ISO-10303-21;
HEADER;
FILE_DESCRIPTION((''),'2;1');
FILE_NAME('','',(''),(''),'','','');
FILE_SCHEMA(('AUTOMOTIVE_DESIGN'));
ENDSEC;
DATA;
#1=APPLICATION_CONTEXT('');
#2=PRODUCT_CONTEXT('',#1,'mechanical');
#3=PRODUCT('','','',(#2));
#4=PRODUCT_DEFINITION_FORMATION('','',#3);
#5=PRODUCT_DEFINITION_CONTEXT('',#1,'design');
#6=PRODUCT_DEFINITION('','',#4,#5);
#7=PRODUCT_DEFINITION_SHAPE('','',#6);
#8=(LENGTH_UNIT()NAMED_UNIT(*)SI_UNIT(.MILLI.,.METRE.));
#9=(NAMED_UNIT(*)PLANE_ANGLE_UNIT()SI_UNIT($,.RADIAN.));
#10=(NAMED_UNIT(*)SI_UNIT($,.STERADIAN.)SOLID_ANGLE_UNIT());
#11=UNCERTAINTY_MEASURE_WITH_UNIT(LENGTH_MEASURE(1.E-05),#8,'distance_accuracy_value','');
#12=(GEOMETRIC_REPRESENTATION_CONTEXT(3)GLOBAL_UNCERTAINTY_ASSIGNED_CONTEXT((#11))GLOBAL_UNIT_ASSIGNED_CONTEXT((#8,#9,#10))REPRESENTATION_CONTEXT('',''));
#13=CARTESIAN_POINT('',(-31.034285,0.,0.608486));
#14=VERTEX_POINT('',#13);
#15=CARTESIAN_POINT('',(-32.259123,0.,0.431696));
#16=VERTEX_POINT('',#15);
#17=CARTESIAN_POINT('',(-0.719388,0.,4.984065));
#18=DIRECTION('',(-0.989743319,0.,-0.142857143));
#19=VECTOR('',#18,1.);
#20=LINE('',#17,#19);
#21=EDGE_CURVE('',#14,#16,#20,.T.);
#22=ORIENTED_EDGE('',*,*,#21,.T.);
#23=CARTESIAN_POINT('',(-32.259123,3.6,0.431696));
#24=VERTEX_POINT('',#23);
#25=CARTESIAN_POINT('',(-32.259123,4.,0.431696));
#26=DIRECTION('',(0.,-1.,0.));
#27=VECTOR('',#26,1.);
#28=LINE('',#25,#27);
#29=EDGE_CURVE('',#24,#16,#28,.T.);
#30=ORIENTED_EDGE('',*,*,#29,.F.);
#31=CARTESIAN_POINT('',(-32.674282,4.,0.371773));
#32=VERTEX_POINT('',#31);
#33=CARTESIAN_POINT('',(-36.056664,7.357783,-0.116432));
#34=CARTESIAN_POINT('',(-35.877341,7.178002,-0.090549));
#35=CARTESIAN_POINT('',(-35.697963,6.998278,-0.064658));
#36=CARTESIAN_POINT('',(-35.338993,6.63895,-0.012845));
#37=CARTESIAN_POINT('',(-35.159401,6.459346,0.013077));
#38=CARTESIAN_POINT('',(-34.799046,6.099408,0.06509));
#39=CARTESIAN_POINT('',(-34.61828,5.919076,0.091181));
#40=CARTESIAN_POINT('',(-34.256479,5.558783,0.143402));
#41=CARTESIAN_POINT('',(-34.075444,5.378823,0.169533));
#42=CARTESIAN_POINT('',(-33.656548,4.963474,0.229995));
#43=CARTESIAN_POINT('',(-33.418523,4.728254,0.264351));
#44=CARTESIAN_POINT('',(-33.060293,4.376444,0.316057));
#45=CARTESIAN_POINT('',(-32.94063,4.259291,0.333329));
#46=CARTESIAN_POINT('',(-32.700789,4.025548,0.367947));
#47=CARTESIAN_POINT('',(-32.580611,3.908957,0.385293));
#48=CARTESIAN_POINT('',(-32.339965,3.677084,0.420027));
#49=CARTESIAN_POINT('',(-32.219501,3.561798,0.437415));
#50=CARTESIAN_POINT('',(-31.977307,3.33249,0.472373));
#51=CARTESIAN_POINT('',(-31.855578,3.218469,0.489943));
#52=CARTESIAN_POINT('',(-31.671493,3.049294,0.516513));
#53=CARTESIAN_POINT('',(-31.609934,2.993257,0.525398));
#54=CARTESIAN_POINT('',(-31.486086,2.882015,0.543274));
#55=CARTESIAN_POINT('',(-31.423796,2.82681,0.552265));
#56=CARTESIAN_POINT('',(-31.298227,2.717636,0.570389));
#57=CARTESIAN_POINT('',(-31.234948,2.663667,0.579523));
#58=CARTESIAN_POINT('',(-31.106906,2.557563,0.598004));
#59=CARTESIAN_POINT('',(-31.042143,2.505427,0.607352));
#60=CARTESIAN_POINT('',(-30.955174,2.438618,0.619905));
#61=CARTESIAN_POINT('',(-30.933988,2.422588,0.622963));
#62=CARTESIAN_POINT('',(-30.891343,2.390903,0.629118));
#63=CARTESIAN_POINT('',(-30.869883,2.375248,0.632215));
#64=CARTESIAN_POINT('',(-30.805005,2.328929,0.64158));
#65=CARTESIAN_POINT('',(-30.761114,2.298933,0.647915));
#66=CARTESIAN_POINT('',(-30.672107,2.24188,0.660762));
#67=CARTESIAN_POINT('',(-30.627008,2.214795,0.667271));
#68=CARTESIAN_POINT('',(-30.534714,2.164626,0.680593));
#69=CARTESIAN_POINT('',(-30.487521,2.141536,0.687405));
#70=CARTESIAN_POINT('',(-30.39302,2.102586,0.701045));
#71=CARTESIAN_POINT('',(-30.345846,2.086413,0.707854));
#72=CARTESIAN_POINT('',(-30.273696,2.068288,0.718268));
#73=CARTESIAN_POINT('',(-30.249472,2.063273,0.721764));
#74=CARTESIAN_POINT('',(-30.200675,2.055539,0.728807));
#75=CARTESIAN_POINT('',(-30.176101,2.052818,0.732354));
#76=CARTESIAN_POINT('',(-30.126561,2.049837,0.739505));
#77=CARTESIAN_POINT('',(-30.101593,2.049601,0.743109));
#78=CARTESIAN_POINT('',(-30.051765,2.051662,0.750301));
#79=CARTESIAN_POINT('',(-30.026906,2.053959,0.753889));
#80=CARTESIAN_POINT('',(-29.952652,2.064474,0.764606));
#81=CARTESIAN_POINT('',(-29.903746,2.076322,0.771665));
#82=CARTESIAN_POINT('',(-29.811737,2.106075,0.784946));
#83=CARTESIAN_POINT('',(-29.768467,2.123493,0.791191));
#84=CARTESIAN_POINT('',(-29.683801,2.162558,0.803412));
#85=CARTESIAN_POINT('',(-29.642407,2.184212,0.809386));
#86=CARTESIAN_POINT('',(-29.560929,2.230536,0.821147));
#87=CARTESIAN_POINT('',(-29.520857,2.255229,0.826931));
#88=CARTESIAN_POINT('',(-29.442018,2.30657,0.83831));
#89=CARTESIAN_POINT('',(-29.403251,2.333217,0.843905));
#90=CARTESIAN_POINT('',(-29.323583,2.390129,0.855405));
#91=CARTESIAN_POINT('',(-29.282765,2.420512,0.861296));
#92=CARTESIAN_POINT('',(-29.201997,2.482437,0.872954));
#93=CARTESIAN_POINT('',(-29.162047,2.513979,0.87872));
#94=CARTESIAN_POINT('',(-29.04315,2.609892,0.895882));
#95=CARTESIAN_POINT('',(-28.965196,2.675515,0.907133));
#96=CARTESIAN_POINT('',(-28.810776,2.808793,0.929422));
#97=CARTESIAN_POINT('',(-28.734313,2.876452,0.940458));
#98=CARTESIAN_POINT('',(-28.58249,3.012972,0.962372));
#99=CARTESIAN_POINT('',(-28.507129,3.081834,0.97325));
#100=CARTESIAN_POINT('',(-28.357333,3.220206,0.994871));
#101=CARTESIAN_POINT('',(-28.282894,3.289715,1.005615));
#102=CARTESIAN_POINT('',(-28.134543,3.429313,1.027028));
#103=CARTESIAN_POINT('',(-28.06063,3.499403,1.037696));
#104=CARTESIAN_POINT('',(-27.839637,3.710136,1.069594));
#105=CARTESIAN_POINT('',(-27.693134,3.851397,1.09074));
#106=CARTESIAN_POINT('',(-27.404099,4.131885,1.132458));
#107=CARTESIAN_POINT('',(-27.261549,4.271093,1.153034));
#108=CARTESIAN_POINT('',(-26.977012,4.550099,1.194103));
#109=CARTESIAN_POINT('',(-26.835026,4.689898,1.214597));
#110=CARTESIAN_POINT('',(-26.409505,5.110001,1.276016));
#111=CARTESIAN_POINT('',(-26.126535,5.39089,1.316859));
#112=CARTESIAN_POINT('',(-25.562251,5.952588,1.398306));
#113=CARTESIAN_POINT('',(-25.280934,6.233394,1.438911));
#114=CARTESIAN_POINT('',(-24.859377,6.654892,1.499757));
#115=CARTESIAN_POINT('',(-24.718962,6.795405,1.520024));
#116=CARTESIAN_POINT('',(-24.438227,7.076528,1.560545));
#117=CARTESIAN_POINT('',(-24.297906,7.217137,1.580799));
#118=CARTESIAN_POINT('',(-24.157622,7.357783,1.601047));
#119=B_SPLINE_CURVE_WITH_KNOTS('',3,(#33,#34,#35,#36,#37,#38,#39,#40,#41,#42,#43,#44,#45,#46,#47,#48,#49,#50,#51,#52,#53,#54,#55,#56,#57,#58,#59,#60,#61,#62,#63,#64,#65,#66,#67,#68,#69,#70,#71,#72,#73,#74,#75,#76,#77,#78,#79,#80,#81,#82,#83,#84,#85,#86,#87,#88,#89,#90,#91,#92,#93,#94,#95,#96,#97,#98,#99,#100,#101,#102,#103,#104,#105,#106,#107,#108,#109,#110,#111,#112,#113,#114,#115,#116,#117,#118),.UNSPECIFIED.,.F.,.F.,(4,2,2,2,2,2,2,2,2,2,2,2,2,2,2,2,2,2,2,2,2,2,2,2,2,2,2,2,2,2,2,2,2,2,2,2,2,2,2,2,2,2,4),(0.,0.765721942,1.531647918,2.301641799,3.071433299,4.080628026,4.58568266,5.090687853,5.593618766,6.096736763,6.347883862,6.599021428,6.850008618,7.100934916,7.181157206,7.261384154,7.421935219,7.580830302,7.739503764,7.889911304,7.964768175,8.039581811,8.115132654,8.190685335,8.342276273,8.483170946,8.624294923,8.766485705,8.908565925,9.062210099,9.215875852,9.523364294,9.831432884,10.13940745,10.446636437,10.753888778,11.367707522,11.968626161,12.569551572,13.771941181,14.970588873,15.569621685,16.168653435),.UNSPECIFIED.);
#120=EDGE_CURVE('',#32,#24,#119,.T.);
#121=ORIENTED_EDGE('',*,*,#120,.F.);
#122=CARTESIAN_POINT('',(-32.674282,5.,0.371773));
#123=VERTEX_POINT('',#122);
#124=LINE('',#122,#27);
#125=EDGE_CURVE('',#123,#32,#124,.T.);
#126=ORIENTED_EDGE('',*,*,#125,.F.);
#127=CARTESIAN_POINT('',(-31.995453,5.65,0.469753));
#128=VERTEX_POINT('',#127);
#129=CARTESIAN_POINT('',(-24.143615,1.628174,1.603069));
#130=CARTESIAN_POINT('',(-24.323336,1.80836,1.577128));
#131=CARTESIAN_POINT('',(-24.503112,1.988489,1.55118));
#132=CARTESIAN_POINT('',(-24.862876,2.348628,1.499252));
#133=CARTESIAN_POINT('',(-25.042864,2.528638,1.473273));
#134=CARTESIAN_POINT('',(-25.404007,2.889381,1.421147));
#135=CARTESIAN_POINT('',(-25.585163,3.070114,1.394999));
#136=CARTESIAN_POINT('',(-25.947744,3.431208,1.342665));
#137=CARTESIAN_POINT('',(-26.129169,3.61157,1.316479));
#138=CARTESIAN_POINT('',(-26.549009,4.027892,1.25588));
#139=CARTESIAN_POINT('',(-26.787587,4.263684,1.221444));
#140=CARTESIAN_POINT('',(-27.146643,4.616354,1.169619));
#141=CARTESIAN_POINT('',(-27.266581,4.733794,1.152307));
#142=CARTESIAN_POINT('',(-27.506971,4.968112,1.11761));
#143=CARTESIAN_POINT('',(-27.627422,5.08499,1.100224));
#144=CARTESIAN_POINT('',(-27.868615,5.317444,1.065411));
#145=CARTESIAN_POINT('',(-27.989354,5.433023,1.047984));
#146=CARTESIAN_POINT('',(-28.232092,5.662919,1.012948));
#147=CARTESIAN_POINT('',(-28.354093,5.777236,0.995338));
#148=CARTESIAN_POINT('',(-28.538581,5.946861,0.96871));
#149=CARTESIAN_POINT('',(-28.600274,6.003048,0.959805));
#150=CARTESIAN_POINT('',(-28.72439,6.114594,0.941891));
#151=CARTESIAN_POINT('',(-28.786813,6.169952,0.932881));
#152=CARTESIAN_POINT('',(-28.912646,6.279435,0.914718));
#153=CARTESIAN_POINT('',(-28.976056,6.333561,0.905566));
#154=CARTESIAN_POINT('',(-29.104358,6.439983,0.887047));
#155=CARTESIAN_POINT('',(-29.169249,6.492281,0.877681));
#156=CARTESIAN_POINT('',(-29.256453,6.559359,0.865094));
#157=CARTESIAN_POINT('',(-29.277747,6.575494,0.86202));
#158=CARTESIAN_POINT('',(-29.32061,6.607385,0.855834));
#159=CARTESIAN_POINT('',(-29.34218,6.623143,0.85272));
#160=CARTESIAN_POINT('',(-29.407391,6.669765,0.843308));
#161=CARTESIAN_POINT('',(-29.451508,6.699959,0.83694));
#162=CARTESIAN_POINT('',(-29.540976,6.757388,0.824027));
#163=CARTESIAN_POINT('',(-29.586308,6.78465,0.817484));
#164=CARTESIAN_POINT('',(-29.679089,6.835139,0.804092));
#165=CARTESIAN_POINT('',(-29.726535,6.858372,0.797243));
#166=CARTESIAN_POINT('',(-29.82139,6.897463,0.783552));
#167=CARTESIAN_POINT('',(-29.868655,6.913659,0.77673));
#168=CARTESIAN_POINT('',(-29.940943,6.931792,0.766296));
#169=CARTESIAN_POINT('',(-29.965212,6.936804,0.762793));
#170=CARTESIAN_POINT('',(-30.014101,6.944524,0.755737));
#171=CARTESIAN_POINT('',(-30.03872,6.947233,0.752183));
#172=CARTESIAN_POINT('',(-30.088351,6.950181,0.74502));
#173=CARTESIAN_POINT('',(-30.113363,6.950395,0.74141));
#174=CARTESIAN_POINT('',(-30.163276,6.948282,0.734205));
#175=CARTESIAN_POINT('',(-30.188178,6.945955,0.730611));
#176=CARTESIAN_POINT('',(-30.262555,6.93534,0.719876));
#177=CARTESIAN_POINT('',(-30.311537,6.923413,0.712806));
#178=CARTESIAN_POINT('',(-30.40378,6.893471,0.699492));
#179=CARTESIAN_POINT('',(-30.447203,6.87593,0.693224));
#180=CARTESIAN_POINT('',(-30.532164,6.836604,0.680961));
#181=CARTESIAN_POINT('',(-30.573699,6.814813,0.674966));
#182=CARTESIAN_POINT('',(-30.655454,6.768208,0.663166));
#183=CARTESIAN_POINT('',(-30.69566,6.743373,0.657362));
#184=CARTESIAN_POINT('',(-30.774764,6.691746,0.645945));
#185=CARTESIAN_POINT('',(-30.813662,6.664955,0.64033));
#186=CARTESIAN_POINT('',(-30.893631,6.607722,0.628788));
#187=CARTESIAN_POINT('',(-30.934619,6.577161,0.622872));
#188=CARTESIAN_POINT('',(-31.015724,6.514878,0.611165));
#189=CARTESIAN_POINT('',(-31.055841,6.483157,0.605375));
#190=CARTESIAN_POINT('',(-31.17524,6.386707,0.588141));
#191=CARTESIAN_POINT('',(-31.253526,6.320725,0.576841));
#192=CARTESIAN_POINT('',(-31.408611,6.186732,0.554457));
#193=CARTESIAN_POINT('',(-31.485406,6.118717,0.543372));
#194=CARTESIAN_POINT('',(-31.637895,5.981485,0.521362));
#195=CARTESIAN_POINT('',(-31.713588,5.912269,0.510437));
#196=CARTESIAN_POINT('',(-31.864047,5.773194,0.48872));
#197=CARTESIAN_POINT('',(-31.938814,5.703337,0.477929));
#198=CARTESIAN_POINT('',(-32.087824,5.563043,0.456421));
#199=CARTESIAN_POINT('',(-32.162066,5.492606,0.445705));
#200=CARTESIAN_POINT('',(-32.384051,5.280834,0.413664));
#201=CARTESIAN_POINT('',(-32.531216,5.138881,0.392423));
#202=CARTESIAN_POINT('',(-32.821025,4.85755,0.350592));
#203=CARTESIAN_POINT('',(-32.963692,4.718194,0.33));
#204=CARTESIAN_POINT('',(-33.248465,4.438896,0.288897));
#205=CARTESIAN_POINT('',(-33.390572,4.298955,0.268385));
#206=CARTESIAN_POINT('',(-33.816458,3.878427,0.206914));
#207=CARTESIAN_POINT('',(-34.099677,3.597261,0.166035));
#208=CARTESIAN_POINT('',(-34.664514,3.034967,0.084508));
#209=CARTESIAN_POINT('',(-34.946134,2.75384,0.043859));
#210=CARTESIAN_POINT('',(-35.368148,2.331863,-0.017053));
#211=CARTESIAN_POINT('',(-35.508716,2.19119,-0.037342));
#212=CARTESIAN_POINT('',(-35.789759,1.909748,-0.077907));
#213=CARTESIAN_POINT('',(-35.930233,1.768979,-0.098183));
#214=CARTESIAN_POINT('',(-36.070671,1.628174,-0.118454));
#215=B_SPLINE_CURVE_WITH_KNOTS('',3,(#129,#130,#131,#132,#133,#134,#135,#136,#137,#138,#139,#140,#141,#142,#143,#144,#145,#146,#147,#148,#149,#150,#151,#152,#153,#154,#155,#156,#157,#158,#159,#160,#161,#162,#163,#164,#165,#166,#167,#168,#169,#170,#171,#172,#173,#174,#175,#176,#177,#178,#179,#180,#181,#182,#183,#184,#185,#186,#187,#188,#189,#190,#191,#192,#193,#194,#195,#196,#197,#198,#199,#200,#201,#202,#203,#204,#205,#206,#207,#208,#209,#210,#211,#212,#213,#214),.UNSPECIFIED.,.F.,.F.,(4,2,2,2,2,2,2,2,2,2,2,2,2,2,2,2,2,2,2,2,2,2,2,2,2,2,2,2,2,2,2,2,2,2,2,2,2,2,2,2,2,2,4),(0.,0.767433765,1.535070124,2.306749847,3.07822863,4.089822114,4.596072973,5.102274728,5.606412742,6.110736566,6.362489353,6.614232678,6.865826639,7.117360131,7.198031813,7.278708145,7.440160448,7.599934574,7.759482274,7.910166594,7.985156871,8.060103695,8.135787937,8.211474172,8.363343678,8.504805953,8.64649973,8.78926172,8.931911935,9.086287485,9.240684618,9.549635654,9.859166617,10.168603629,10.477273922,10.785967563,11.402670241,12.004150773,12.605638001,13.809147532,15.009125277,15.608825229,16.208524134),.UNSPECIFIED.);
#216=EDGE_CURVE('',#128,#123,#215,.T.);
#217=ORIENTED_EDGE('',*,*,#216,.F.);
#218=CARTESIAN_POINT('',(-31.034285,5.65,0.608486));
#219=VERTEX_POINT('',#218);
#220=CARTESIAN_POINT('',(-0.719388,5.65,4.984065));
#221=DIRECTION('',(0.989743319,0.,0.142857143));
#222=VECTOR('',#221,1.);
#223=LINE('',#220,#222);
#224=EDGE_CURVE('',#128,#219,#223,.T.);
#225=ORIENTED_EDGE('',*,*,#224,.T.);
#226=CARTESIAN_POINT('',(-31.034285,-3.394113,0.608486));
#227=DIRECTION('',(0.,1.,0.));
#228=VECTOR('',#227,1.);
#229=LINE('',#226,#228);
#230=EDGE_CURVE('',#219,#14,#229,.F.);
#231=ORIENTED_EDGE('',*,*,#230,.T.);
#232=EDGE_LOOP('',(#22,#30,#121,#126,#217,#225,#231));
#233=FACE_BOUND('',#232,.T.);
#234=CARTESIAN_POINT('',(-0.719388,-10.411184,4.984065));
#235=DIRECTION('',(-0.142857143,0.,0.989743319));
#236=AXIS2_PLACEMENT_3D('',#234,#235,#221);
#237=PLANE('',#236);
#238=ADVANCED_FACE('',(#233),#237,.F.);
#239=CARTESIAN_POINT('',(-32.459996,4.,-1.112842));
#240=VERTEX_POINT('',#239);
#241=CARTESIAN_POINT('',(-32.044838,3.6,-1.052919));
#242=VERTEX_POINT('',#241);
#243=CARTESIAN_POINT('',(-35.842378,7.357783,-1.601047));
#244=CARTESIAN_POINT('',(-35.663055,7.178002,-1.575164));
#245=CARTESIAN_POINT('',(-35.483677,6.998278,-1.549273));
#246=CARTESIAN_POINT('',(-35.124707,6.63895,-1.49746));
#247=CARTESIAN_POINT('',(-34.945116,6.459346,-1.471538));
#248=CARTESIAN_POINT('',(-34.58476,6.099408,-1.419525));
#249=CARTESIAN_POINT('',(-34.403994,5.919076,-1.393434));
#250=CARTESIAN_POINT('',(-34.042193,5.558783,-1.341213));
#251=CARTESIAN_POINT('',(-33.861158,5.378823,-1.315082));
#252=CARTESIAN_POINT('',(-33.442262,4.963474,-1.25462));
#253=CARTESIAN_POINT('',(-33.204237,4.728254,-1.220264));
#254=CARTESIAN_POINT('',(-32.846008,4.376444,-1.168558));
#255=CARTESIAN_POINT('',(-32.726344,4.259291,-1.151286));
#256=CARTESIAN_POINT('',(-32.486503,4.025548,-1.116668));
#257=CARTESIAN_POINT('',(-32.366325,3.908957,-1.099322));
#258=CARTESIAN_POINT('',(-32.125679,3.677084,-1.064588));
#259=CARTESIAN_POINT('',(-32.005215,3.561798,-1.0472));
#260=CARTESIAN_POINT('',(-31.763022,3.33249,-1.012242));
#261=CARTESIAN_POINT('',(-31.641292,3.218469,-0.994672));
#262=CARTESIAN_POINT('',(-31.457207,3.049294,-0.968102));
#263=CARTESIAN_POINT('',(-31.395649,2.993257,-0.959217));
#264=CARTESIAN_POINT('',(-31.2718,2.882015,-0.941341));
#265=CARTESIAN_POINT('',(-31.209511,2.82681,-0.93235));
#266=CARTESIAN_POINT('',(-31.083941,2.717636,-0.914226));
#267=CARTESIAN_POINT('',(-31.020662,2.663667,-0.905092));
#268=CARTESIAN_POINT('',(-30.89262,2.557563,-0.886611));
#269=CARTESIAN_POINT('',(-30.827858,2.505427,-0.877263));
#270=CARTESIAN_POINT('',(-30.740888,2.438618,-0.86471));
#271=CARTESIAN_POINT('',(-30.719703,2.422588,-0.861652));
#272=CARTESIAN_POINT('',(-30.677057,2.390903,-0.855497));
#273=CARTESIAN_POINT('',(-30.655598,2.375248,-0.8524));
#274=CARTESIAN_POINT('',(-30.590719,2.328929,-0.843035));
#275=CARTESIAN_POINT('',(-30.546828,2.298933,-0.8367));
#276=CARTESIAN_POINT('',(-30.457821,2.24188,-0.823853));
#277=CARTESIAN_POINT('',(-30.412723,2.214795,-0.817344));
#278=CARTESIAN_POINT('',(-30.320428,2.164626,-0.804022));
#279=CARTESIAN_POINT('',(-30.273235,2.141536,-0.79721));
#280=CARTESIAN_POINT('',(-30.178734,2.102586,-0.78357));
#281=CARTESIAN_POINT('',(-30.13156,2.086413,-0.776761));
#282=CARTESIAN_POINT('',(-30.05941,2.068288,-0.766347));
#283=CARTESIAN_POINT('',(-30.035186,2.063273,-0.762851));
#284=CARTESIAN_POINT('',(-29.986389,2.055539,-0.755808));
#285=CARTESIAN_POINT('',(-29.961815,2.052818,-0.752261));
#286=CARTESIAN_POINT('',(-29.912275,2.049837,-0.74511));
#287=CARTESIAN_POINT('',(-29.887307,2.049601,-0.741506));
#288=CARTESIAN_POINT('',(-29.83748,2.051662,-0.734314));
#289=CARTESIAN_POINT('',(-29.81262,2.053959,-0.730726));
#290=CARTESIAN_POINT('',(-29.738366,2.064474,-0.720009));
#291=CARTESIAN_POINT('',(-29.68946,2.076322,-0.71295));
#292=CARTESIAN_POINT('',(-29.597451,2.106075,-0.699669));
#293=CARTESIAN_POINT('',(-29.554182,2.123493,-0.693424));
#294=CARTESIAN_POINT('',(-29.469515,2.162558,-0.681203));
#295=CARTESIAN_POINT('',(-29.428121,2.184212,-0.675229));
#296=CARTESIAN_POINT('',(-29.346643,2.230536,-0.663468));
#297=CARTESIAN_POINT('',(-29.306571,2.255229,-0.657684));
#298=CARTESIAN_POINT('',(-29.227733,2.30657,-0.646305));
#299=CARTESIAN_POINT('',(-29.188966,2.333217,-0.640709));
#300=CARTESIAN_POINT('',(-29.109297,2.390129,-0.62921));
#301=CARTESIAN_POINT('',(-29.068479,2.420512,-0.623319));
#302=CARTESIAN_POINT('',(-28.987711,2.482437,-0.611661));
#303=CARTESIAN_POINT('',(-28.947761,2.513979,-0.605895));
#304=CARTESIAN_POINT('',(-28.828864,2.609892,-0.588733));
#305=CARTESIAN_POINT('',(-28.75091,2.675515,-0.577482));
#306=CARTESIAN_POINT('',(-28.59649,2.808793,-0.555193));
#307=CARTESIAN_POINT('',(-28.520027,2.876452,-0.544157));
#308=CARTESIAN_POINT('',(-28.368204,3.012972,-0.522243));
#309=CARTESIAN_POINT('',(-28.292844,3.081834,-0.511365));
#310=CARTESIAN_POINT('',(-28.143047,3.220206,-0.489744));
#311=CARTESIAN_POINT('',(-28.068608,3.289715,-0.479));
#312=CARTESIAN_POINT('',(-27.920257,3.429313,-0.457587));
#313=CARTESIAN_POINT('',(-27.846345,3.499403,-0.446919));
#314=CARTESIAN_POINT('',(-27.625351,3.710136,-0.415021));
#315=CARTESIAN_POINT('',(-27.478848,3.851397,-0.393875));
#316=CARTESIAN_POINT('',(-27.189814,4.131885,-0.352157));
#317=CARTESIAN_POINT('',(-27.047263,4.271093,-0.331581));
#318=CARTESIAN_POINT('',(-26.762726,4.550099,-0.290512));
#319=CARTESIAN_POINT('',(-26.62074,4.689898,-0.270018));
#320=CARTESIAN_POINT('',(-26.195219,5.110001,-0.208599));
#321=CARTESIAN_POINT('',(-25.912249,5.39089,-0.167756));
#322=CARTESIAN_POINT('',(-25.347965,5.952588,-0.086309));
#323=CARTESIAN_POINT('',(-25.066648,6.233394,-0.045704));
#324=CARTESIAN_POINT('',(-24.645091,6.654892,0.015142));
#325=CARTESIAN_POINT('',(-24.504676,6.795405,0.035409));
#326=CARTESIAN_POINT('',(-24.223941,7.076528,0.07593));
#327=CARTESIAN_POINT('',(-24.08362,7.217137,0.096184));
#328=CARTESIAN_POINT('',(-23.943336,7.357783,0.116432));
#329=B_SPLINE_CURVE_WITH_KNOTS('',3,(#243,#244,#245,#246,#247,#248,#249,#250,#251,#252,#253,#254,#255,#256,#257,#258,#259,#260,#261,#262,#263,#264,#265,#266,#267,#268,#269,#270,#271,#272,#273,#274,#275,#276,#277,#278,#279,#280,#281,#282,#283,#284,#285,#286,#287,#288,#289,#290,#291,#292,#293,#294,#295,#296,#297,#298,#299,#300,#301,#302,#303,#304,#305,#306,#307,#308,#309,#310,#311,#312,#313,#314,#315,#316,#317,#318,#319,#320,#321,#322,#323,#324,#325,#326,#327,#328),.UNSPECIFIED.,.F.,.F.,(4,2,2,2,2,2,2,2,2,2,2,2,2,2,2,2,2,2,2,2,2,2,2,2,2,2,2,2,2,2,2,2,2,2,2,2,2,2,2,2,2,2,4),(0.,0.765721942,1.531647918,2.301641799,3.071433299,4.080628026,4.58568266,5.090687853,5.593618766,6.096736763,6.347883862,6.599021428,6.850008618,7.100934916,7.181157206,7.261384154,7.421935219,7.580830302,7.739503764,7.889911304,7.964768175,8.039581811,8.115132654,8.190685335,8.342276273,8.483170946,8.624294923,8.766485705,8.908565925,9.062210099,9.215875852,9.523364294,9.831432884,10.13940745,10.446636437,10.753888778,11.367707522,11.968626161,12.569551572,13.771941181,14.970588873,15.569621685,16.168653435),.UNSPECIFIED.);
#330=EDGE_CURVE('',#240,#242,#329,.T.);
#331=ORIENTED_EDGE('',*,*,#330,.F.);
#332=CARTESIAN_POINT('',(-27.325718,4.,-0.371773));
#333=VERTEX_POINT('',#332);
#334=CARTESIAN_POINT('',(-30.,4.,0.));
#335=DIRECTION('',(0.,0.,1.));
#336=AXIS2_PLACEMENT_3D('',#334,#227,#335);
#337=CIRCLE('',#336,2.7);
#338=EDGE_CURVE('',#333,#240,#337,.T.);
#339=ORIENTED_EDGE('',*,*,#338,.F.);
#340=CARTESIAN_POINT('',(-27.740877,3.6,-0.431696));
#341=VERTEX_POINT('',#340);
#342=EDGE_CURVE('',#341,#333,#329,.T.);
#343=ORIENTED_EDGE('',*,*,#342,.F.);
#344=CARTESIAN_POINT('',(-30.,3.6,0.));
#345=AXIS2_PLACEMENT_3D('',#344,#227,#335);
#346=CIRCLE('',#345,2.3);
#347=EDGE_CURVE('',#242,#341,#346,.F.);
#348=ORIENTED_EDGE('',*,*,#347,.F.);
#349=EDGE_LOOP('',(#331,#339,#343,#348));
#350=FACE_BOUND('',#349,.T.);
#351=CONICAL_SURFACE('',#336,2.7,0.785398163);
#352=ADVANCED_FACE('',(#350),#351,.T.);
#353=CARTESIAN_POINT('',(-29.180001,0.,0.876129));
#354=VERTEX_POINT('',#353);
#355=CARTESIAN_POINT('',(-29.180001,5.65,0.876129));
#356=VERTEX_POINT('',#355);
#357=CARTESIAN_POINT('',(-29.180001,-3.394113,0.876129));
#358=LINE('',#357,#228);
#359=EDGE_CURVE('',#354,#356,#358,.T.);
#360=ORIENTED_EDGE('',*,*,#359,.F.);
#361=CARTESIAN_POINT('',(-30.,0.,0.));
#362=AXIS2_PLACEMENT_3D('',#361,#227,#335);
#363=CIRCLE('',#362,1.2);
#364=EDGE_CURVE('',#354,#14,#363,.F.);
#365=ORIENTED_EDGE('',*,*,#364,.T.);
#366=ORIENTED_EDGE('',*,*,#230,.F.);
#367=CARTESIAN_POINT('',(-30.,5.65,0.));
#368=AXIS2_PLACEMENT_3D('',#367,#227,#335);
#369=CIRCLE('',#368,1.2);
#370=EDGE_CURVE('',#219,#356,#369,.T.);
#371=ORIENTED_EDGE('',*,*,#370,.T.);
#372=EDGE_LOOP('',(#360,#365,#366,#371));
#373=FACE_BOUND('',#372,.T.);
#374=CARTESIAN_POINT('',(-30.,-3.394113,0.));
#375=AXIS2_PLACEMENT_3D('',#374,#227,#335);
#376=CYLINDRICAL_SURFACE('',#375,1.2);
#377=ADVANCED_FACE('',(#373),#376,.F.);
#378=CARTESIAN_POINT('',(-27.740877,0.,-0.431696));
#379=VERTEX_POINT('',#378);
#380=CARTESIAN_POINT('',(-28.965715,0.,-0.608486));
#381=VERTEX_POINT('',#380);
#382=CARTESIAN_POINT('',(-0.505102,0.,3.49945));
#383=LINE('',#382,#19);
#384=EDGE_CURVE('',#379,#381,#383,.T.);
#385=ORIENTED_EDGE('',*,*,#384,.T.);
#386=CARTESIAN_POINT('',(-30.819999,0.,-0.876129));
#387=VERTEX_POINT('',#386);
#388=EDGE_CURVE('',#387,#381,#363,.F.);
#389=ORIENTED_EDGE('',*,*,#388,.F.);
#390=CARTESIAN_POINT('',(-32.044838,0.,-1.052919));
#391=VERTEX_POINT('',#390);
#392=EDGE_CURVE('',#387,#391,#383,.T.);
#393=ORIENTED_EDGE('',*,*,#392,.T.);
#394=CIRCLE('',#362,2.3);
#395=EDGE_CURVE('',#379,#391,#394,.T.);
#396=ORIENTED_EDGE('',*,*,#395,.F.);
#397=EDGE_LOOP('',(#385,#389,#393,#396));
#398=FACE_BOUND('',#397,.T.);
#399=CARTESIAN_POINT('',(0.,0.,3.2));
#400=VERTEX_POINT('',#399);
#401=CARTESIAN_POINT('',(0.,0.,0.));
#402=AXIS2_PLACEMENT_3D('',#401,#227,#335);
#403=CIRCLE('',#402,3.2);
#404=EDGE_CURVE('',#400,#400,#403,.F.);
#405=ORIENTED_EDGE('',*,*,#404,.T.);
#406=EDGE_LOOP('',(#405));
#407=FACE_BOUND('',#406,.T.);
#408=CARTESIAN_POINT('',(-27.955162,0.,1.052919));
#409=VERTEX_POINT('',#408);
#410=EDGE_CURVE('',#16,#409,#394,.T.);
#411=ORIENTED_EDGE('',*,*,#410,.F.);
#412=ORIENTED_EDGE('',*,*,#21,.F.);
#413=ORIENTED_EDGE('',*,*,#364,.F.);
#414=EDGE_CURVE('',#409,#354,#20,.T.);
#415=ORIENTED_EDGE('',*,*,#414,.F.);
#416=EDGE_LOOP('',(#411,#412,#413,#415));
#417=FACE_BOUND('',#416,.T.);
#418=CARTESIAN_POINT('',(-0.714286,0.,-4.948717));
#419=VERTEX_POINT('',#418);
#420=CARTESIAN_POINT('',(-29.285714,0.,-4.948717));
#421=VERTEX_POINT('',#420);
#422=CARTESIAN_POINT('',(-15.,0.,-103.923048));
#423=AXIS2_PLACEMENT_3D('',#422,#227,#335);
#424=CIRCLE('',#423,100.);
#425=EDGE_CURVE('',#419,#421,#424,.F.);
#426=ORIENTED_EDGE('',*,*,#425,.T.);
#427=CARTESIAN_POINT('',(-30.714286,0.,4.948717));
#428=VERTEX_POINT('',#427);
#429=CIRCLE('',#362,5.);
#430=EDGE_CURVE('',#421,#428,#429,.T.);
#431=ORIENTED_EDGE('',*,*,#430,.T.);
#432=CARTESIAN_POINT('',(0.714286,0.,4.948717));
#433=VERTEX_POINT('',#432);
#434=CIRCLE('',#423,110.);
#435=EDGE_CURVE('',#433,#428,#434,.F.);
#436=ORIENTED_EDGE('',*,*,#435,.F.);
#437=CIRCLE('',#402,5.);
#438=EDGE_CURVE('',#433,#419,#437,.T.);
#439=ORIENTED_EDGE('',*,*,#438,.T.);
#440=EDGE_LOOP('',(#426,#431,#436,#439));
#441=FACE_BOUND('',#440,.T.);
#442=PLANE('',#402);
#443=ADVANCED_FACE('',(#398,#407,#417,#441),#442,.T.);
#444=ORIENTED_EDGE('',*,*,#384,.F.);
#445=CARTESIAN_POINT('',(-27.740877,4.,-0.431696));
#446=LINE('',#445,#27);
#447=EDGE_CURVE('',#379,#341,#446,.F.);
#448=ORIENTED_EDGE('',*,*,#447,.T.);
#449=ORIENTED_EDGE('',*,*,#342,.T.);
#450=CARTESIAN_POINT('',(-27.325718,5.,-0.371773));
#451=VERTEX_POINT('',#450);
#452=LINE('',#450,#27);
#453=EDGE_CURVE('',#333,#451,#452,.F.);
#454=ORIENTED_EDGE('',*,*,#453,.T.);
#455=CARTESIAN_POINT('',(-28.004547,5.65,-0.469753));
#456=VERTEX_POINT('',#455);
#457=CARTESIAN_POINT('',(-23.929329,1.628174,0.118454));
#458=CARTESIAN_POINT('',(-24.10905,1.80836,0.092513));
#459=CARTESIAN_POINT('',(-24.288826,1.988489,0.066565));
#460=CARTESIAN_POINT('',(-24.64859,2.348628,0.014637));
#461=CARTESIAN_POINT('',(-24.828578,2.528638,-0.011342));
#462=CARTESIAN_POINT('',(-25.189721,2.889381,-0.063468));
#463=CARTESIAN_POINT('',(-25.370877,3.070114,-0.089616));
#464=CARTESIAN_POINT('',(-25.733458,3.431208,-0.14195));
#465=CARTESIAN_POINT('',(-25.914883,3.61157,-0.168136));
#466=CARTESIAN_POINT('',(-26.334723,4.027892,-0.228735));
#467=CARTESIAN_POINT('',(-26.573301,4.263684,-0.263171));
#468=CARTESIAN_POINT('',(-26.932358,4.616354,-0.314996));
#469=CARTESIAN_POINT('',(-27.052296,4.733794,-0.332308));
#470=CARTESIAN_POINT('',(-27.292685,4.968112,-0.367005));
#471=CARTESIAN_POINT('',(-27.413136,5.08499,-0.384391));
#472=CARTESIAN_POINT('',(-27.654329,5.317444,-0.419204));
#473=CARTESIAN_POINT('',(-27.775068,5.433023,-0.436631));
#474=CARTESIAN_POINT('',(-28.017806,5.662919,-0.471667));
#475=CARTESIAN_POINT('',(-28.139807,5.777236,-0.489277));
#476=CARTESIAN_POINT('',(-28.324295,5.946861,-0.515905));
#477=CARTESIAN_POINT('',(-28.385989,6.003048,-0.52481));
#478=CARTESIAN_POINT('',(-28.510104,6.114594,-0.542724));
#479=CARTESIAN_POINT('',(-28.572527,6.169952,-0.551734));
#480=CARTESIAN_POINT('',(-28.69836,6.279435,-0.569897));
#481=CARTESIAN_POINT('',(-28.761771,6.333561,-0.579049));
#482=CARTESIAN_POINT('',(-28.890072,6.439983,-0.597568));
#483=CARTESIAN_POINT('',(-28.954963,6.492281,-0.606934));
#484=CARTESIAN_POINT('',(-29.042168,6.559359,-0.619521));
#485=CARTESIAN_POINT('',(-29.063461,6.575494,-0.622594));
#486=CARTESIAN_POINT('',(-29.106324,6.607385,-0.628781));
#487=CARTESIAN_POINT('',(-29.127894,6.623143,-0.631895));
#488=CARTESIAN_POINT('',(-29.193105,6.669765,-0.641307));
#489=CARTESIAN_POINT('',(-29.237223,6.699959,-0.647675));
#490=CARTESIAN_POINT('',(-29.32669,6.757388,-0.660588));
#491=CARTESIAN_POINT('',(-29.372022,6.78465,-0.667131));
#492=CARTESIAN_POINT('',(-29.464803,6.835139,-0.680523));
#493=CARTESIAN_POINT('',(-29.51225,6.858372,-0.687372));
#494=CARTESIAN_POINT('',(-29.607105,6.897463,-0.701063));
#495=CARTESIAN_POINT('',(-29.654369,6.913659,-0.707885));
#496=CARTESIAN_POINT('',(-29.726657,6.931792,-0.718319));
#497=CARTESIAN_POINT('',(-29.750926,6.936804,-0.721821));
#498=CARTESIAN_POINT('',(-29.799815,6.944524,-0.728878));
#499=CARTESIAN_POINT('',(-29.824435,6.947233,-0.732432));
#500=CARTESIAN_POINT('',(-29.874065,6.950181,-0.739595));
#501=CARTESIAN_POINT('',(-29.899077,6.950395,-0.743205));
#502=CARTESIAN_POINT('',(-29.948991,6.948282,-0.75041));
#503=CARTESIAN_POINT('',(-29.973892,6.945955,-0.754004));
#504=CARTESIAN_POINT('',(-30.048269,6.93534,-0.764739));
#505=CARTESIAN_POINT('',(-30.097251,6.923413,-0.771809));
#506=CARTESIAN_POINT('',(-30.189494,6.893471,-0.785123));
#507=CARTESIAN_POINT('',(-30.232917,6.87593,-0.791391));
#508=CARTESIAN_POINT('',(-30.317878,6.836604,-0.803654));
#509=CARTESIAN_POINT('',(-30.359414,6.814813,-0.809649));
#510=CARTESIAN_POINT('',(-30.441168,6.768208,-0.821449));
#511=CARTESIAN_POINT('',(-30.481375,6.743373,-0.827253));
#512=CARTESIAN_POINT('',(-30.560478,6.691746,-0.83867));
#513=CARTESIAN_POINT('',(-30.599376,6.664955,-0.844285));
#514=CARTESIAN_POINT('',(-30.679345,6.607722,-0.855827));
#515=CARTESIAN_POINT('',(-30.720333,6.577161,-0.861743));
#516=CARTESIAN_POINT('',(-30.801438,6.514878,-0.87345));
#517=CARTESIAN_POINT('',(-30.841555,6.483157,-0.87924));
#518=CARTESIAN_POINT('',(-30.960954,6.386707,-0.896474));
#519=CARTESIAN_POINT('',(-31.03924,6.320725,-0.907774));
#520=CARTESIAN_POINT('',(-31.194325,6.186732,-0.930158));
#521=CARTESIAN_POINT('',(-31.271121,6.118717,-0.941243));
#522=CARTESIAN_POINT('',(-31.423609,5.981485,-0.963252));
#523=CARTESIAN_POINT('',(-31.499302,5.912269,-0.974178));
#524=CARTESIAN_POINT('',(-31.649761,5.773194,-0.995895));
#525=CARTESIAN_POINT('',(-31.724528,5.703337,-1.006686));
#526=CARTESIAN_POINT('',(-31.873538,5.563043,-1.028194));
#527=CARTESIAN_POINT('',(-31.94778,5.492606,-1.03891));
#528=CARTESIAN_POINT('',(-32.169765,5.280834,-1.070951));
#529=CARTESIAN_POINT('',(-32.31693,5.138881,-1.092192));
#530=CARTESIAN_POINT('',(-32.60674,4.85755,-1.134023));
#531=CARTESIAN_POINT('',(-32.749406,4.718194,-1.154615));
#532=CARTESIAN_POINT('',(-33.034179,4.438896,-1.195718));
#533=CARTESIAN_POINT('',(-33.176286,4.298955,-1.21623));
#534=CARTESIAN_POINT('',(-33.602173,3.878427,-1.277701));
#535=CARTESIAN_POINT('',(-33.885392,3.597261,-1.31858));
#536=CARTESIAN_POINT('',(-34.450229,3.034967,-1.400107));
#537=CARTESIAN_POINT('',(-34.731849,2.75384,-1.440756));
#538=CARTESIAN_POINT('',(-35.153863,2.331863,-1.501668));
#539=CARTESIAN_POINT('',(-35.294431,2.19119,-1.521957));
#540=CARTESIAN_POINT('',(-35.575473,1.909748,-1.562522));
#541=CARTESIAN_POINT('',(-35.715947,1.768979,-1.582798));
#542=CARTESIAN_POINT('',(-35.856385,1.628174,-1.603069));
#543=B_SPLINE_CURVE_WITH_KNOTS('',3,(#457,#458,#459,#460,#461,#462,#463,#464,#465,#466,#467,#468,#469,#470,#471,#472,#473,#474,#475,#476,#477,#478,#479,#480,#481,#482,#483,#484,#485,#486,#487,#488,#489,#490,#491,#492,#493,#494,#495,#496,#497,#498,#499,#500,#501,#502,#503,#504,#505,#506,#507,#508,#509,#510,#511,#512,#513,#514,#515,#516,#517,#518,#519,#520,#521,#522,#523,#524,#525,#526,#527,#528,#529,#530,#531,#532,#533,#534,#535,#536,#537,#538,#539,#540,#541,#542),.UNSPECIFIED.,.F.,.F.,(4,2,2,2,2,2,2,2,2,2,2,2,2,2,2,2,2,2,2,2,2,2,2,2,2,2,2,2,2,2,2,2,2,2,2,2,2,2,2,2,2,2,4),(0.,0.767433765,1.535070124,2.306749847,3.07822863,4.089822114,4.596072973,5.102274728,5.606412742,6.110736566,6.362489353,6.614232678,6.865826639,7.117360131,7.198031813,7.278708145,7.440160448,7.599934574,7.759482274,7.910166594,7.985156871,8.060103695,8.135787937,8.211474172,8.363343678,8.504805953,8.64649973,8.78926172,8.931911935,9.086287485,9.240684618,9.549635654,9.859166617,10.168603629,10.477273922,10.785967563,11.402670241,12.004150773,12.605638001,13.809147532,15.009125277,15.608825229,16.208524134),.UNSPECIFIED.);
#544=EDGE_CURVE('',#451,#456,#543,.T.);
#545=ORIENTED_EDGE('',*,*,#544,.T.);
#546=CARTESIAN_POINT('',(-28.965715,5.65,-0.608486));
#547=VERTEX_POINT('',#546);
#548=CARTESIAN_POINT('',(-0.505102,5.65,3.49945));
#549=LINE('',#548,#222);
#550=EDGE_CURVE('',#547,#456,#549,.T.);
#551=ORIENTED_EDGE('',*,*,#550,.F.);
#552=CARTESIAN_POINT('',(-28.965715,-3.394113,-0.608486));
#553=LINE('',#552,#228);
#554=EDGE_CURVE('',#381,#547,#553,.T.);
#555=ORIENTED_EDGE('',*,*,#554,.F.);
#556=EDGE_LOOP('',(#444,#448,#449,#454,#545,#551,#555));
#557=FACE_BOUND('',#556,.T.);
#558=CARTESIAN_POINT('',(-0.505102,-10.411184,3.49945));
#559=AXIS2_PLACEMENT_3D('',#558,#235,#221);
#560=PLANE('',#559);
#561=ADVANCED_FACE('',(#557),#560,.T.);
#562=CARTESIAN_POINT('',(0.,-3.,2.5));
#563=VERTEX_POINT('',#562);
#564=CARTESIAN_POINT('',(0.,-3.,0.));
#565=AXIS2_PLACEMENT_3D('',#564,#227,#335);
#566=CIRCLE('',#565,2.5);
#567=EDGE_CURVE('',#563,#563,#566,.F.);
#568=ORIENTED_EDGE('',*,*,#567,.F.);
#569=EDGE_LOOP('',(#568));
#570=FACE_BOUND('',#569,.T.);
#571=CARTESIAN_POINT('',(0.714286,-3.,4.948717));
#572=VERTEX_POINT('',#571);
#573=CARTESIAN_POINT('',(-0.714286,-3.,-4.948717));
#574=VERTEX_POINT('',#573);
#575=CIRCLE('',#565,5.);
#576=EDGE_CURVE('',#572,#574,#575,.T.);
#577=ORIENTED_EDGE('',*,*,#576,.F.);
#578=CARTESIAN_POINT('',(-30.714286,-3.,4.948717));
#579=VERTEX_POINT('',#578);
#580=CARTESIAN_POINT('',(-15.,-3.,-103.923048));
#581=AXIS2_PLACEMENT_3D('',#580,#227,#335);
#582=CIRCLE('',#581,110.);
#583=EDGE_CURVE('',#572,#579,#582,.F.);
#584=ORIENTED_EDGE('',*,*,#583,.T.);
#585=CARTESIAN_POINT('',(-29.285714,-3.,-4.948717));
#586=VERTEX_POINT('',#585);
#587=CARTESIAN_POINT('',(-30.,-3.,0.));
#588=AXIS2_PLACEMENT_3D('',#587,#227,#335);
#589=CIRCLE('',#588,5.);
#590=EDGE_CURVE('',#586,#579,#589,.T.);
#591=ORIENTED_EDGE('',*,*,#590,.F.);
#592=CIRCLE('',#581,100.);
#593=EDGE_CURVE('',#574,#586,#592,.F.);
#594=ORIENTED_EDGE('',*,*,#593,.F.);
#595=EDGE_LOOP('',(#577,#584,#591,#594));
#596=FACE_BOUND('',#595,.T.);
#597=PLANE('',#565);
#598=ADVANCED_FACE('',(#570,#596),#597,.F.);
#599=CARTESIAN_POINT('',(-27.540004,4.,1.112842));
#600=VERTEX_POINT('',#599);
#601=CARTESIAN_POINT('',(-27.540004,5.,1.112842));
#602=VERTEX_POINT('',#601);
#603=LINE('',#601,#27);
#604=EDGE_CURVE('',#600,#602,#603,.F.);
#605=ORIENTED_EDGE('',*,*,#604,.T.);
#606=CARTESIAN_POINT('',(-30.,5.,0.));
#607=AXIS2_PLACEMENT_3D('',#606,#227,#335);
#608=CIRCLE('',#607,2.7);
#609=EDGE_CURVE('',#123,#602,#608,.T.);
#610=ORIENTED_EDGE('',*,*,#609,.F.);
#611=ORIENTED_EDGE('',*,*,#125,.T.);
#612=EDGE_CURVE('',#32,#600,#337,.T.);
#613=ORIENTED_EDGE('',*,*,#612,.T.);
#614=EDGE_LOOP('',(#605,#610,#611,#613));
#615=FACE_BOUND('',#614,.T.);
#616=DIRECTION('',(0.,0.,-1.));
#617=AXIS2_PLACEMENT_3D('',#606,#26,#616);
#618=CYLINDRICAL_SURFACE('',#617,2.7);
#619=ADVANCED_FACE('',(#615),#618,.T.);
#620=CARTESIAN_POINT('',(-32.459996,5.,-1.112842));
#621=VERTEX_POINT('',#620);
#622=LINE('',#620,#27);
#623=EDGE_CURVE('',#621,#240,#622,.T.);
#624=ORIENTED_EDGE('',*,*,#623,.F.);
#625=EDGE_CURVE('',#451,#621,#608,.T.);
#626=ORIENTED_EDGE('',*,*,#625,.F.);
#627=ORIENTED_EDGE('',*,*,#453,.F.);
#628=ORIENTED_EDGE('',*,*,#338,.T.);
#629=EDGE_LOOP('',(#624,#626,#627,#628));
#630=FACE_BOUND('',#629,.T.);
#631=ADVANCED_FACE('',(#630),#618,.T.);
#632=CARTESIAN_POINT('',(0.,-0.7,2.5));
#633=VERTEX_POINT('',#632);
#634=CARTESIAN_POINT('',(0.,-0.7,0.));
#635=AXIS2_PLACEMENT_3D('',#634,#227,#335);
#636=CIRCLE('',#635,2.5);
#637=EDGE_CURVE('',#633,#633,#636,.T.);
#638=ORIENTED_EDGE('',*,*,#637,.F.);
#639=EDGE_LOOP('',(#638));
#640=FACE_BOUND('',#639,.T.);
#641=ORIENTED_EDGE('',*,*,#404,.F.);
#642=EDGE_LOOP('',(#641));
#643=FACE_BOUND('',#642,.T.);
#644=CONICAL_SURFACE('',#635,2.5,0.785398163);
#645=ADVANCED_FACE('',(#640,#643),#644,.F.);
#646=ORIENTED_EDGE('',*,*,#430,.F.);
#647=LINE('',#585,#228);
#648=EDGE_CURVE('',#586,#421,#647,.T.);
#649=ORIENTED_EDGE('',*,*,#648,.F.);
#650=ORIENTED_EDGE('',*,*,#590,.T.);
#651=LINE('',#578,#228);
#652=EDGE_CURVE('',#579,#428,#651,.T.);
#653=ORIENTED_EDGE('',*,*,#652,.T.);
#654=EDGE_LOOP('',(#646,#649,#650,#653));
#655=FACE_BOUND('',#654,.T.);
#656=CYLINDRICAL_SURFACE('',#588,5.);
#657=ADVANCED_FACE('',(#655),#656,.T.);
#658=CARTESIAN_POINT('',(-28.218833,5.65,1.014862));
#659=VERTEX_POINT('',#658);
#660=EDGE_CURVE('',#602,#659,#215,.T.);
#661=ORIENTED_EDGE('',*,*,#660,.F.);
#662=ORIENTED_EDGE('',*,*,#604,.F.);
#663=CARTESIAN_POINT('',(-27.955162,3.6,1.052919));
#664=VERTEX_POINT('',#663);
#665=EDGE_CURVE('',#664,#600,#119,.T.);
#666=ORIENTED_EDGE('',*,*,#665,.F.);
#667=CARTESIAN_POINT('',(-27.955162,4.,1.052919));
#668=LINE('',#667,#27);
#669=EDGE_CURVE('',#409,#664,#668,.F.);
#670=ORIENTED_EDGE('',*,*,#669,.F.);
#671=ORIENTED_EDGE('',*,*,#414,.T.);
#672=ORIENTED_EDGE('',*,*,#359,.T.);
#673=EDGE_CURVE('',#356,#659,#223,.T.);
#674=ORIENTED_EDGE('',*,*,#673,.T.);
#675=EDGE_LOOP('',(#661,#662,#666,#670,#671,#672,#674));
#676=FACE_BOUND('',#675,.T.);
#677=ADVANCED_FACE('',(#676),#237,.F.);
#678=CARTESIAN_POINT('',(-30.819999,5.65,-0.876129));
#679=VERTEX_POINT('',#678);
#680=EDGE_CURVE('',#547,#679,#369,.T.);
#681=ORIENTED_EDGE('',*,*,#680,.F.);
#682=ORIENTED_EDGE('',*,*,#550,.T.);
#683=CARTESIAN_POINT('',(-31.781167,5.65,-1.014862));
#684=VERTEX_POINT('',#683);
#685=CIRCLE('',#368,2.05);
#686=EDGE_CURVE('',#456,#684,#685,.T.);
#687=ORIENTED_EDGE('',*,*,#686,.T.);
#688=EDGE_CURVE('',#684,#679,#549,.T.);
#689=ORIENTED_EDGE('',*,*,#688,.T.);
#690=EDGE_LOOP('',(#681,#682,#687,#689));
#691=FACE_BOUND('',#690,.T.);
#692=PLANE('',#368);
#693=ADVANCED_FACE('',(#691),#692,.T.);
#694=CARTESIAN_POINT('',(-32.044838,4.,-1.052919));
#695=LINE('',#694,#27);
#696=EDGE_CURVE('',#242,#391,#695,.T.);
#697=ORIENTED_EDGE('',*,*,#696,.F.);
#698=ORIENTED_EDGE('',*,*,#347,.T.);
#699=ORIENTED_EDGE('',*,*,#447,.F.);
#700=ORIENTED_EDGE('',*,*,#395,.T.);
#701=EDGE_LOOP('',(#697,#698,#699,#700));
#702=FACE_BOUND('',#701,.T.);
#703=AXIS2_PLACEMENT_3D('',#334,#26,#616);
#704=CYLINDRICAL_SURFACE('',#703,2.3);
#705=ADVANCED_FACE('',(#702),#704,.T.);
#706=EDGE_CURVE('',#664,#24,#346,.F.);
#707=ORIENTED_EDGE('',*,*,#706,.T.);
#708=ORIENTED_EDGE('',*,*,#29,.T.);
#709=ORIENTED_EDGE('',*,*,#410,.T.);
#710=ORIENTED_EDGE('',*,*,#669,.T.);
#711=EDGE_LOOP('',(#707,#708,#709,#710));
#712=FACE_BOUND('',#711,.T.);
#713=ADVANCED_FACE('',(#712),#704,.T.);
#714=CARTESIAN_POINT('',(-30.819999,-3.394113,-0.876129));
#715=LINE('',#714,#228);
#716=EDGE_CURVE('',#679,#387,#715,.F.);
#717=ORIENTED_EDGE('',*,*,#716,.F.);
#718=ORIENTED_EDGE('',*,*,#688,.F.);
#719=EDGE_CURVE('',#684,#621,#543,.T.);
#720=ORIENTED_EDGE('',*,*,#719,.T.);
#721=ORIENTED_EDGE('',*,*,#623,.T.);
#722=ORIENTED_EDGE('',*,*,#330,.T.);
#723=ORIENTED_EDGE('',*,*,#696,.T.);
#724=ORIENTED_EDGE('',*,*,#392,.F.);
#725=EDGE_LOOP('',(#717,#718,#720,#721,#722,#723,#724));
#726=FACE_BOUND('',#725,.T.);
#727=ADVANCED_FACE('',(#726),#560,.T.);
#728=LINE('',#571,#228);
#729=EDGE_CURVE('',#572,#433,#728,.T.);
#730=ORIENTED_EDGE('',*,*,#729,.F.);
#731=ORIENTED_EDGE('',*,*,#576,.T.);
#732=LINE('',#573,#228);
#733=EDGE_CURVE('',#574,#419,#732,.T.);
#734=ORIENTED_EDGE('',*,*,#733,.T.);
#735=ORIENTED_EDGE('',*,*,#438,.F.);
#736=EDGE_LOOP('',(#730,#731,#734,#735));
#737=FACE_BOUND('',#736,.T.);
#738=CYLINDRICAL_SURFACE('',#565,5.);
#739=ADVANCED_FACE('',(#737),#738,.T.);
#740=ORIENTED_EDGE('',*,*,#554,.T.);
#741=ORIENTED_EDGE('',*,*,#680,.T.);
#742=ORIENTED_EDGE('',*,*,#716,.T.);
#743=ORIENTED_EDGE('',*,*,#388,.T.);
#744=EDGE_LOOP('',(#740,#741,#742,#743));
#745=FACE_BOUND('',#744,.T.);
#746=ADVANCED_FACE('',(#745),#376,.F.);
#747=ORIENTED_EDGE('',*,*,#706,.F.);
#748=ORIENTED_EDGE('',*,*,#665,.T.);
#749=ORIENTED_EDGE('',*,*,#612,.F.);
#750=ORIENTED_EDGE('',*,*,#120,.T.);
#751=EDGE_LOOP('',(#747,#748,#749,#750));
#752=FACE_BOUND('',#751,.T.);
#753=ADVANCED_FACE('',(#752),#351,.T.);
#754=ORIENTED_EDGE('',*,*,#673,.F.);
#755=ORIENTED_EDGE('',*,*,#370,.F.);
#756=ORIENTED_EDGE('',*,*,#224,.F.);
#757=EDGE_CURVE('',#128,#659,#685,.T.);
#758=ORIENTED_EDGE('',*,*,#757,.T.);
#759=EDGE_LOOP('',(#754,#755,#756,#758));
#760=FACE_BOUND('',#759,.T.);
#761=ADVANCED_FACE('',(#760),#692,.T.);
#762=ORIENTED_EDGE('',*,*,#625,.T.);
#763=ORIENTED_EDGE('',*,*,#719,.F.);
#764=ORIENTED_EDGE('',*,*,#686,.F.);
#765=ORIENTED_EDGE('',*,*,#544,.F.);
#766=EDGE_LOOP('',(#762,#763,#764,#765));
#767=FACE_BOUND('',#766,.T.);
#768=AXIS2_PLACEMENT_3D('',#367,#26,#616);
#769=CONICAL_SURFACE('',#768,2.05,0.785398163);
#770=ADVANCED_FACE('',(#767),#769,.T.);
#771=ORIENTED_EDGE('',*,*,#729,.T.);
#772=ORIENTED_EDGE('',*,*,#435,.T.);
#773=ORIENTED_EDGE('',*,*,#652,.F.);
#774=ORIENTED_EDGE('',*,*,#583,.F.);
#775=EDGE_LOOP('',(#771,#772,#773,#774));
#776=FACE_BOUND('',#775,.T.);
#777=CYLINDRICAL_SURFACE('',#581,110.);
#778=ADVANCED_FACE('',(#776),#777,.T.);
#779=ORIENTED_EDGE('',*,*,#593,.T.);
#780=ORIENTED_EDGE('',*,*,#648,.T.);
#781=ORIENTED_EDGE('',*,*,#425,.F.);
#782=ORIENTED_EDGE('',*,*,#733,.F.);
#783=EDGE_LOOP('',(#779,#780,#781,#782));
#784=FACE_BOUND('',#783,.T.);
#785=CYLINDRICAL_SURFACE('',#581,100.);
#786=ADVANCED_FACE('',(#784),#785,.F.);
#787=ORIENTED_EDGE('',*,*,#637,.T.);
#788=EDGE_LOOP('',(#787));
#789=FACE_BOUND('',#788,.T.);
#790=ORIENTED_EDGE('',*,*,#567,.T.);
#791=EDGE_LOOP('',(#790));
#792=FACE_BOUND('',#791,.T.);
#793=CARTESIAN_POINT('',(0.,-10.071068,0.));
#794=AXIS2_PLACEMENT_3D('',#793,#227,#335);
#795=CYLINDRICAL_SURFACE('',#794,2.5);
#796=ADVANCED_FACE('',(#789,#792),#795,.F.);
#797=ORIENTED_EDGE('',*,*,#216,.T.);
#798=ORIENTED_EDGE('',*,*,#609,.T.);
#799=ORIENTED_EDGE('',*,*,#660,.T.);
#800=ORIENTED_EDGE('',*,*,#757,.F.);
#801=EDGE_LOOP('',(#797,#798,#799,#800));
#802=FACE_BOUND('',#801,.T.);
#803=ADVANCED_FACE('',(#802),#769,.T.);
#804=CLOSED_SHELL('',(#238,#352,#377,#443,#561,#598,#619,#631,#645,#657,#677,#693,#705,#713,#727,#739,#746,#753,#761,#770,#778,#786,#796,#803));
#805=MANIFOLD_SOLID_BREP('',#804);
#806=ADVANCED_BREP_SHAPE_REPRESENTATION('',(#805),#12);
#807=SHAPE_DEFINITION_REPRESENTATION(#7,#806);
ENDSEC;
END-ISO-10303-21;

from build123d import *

# Parameters (mm, degrees)
SKETCH1_R           = 5
BOSS_EXTRUDE1_DEPTH = 3
SKETCH2_R           = 2.5
CUT_EXTRUDE1_DEPTH  = 3
CHAMFER1_SIZE       = 0.7
SKETCH3_R           = 2.3
BOSS_EXTRUDE2_DEPTH = 4
SKETCH4_R           = 2.7
BOSS_EXTRUDE3_DEPTH = 1
CHAMFER2_SIZE       = 0.4
SKETCH5_R           = 2.05
BOSS_EXTRUDE4_DEPTH = 0.65
CHAMFER3_SIZE       = 0.65
CUT_EXTRUDE2_REACH  = 38.562
SKETCH7_R           = 1.2
CUT_EXTRUDE3_DEPTH  = 5.65


with BuildPart() as part:
    # Sketch1 → Boss-Extrude1 (new body)
    with BuildSketch(Plane(origin=(0, 0, 0), x_dir=(1, 0, 0), z_dir=(0, 1, 0))):
        with Locations((-30, 0)):
            Circle(SKETCH1_R)
        with BuildLine():
            ThreePointArc((0.714285714, -4.948716593), (-4.948716593, -0.714285714), (-0.714285714, 4.948716593))
            ThreePointArc((-0.714285714, 4.948716593), (-15, 3.923048454), (-29.285714286, 4.948716593))
            ThreePointArc((-29.285714286, 4.948716593), (-26.22035527, 3.273268354), (-25, 0))
            ThreePointArc((-25, 0), (-26.726731646, -3.77964473), (-30.714285714, -4.948716593))
            ThreePointArc((-30.714285714, -4.948716593), (-15, -6.076951546), (0.714285714, -4.948716593))
        make_face()
        Circle(SKETCH1_R)
    extrude(amount=-BOSS_EXTRUDE1_DEPTH)

    # Sketch2 → Cut-Extrude1 (cut)
    with BuildSketch(Plane(origin=(0, 0, 0), x_dir=(1, 0, 0), z_dir=(0, 1, 0))):
        with Locations(Location((0, 0, 0), (0, 0, 270))):
            Circle(SKETCH2_R)
    extrude(amount=-CUT_EXTRUDE1_DEPTH, mode=Mode.SUBTRACT)

    # Chamfer1
    chamfer1_edges = [part.edges().sort_by_distance(p)[0] for p in [
        (0, 0, -2.5),
    ]]
    chamfer(chamfer1_edges, length=CHAMFER1_SIZE)

    # Sketch3 → Boss-Extrude2 (add)
    with BuildSketch(Plane(origin=(0, 0, 0), x_dir=(1, 0, 0), z_dir=(0, 1, 0))):
        with Locations(Location((-30, 0, 0), (0, 0, 270))):
            Circle(SKETCH3_R)
    extrude(amount=BOSS_EXTRUDE2_DEPTH)

    # Sketch4 → Boss-Extrude3 (add)
    with BuildSketch(Plane(origin=(0, 4, 0), x_dir=(1, 0, 0), z_dir=(0, 1, 0))):
        with Locations(Location((-30, 0, 0), (0, 0, 270))):
            Circle(SKETCH4_R)
    extrude(amount=BOSS_EXTRUDE3_DEPTH)

    # Chamfer2
    chamfer2_edges = [part.edges().sort_by_distance(p)[0] for p in [
        (-30, 4, -2.3),
    ]]
    chamfer(chamfer2_edges, length=CHAMFER2_SIZE - 0.0001)  # a hair under: the kernel refuses the full size

    # Sketch5 → Boss-Extrude4 (add)
    with BuildSketch(Plane(origin=(0, 5, 0), x_dir=(1, 0, 0), z_dir=(0, 1, 0))):
        with Locations(Location((-30, 0, 0), (0, 0, 270))):
            Circle(SKETCH5_R)
    extrude(amount=BOSS_EXTRUDE4_DEPTH)

    # Chamfer3
    chamfer3_edges = [part.edges().sort_by_distance(p)[0] for p in [
        (-30, 5, -2.05),
    ]]
    chamfer(chamfer3_edges, length=CHAMFER3_SIZE - 0.0001)  # a hair under: the kernel refuses the full size

    # Cut-Extrude2: up to this face of the body (flat: up to its plane)
    cut_extrude2_end = Plane(part.part.faces().sort_by_distance((-15.705189874, 0, 0.65316875))[0])
    # Sketch6 → Cut-Extrude2 (cut, up to the picked face)
    with BuildSketch(Plane(origin=(0, 5.65, 0), x_dir=(1, 0, 0), z_dir=(0, 1, 0)), mode=Mode.PRIVATE) as cut_extrude2_sk1:
        with BuildLine():
            ThreePointArc((-34.78558394, 1.448511772), (-34.948716593, 0.714285714), (-34.999869654, -0.036103206))
            Line((-34.999869654, -0.036103206), (-31.995452759, -0.469753431))
            ThreePointArc((-31.995452759, -0.469753431), (-32.028973803, 0.292857143), (-31.781167045, 1.014861547))
            Line((-31.781167045, 1.014861547), (-34.78558394, 1.448511772))
        make_face()
    cut_extrude2_tool1 = split(extrude(cut_extrude2_sk1.sketch, amount=-CUT_EXTRUDE2_REACH, mode=Mode.PRIVATE), bisect_by=cut_extrude2_end, keep=Keep.BOTH, mode=Mode.PRIVATE)
    # Sketch6 → Cut-Extrude2 (cut, up to the picked face)
    with BuildSketch(Plane(origin=(0, 5.65, 0), x_dir=(1, 0, 0), z_dir=(0, 1, 0)), mode=Mode.PRIVATE) as cut_extrude2_sk2:
        with BuildLine():
            Line((-28.218832955, -1.014861547), (-25.21441606, -1.448511772))
            ThreePointArc((-25.21441606, -1.448511772), (-25.053894476, -0.732147629), (-25, 0))
            ThreePointArc((-25, 0), (-25.000032587, 0.01805172), (-25.000130346, 0.036103206))
            Line((-25.000130346, 0.036103206), (-28.004547241, 0.469753431))
            ThreePointArc((-28.004547241, 0.469753431), (-27.963682471, 0.236454905), (-27.95, 0))
            ThreePointArc((-27.95, 0), (-28.018347603, -0.524932166), (-28.218832955, -1.014861547))
        make_face()
    cut_extrude2_tool2 = split(extrude(cut_extrude2_sk2.sketch, amount=-CUT_EXTRUDE2_REACH, mode=Mode.PRIVATE), bisect_by=cut_extrude2_end, keep=Keep.BOTH, mode=Mode.PRIVATE)
    # Sketch6 → Cut-Extrude2 (cut, up to the picked face)
    with BuildSketch(Plane(origin=(0, 5.65, 0), x_dir=(1, 0, 0), z_dir=(0, 1, 0)), mode=Mode.PRIVATE) as cut_extrude2_sk3:
        with BuildLine():
            ThreePointArc((-31.781167045, 1.014861547), (-32.028973803, 0.292857143), (-31.995452759, -0.469753431))
            Line((-31.995452759, -0.469753431), (-28.218832955, -1.014861547))
            ThreePointArc((-28.218832955, -1.014861547), (-28.018347603, -0.524932166), (-27.95, 0))
            ThreePointArc((-27.95, 0), (-27.963682471, 0.236454905), (-28.004547241, 0.469753431))
            Line((-28.004547241, 0.469753431), (-31.781167045, 1.014861547))
        make_face()
    cut_extrude2_tool3 = split(extrude(cut_extrude2_sk3.sketch, amount=-CUT_EXTRUDE2_REACH, mode=Mode.PRIVATE), bisect_by=cut_extrude2_end, keep=Keep.BOTH, mode=Mode.PRIVATE)
    # Sketch6 → Cut-Extrude2 (cut, up to the picked face)
    with BuildSketch(Plane(origin=(0, 5.65, 0), x_dir=(1, 0, 0), z_dir=(0, 1, 0)), mode=Mode.PRIVATE) as cut_extrude2_sk4:
        with BuildLine():
            ThreePointArc((-34.78558394, 1.448511772), (-34.948716593, 0.714285714), (-34.999869654, -0.036103206))
            Line((-34.999869654, -0.036103206), (-31.995452759, -0.469753431))
            ThreePointArc((-31.995452759, -0.469753431), (-32.028973803, 0.292857143), (-31.781167045, 1.014861547))
            Line((-31.781167045, 1.014861547), (-34.78558394, 1.448511772))
        make_face()
    cut_extrude2_tool4 = split(extrude(cut_extrude2_sk4.sketch, amount=-CUT_EXTRUDE2_REACH, mode=Mode.PRIVATE), bisect_by=cut_extrude2_end, keep=Keep.BOTH, mode=Mode.PRIVATE)
    # Sketch6 → Cut-Extrude2 (cut, up to the picked face)
    with BuildSketch(Plane(origin=(0, 5.65, 0), x_dir=(1, 0, 0), z_dir=(0, 1, 0)), mode=Mode.PRIVATE) as cut_extrude2_sk5:
        with BuildLine():
            Line((-28.218832955, -1.014861547), (-25.21441606, -1.448511772))
            ThreePointArc((-25.21441606, -1.448511772), (-25.053894476, -0.732147629), (-25, 0))
            ThreePointArc((-25, 0), (-25.000032587, 0.01805172), (-25.000130346, 0.036103206))
            Line((-25.000130346, 0.036103206), (-28.004547241, 0.469753431))
            ThreePointArc((-28.004547241, 0.469753431), (-27.963682471, 0.236454905), (-27.95, 0))
            ThreePointArc((-27.95, 0), (-28.018347603, -0.524932166), (-28.218832955, -1.014861547))
        make_face()
    cut_extrude2_tool5 = split(extrude(cut_extrude2_sk5.sketch, amount=-CUT_EXTRUDE2_REACH, mode=Mode.PRIVATE), bisect_by=cut_extrude2_end, keep=Keep.BOTH, mode=Mode.PRIVATE)
    add(cut_extrude2_tool1.solids().sort_by(Axis((-33.456178, 5.65, -0.498856), (0, -1, 0)))[0], mode=Mode.SUBTRACT)
    add(cut_extrude2_tool2.solids().sort_by(Axis((-26.543822, 5.65, 0.498856), (0, -1, 0)))[0], mode=Mode.SUBTRACT)
    add(cut_extrude2_tool3.solids().sort_by(Axis((-30, 5.65, 0), (0, -1, 0)))[0], mode=Mode.SUBTRACT)
    add(cut_extrude2_tool4.solids().sort_by(Axis((-33.456178, 5.65, -0.498856), (0, -1, 0)))[0], mode=Mode.SUBTRACT)
    add(cut_extrude2_tool5.solids().sort_by(Axis((-26.543822, 5.65, 0.498856), (0, -1, 0)))[0], mode=Mode.SUBTRACT)

    # Sketch7 → Cut-Extrude3 (cut)
    with BuildSketch(Plane(origin=(0, 5.65, 0), x_dir=(1, 0, 0), z_dir=(0, 1, 0))):
        with Locations((-30, 0)):
            Circle(SKETCH7_R)
    extrude(amount=-CUT_EXTRUDE3_DEPTH, mode=Mode.SUBTRACT)


solid = part.part
